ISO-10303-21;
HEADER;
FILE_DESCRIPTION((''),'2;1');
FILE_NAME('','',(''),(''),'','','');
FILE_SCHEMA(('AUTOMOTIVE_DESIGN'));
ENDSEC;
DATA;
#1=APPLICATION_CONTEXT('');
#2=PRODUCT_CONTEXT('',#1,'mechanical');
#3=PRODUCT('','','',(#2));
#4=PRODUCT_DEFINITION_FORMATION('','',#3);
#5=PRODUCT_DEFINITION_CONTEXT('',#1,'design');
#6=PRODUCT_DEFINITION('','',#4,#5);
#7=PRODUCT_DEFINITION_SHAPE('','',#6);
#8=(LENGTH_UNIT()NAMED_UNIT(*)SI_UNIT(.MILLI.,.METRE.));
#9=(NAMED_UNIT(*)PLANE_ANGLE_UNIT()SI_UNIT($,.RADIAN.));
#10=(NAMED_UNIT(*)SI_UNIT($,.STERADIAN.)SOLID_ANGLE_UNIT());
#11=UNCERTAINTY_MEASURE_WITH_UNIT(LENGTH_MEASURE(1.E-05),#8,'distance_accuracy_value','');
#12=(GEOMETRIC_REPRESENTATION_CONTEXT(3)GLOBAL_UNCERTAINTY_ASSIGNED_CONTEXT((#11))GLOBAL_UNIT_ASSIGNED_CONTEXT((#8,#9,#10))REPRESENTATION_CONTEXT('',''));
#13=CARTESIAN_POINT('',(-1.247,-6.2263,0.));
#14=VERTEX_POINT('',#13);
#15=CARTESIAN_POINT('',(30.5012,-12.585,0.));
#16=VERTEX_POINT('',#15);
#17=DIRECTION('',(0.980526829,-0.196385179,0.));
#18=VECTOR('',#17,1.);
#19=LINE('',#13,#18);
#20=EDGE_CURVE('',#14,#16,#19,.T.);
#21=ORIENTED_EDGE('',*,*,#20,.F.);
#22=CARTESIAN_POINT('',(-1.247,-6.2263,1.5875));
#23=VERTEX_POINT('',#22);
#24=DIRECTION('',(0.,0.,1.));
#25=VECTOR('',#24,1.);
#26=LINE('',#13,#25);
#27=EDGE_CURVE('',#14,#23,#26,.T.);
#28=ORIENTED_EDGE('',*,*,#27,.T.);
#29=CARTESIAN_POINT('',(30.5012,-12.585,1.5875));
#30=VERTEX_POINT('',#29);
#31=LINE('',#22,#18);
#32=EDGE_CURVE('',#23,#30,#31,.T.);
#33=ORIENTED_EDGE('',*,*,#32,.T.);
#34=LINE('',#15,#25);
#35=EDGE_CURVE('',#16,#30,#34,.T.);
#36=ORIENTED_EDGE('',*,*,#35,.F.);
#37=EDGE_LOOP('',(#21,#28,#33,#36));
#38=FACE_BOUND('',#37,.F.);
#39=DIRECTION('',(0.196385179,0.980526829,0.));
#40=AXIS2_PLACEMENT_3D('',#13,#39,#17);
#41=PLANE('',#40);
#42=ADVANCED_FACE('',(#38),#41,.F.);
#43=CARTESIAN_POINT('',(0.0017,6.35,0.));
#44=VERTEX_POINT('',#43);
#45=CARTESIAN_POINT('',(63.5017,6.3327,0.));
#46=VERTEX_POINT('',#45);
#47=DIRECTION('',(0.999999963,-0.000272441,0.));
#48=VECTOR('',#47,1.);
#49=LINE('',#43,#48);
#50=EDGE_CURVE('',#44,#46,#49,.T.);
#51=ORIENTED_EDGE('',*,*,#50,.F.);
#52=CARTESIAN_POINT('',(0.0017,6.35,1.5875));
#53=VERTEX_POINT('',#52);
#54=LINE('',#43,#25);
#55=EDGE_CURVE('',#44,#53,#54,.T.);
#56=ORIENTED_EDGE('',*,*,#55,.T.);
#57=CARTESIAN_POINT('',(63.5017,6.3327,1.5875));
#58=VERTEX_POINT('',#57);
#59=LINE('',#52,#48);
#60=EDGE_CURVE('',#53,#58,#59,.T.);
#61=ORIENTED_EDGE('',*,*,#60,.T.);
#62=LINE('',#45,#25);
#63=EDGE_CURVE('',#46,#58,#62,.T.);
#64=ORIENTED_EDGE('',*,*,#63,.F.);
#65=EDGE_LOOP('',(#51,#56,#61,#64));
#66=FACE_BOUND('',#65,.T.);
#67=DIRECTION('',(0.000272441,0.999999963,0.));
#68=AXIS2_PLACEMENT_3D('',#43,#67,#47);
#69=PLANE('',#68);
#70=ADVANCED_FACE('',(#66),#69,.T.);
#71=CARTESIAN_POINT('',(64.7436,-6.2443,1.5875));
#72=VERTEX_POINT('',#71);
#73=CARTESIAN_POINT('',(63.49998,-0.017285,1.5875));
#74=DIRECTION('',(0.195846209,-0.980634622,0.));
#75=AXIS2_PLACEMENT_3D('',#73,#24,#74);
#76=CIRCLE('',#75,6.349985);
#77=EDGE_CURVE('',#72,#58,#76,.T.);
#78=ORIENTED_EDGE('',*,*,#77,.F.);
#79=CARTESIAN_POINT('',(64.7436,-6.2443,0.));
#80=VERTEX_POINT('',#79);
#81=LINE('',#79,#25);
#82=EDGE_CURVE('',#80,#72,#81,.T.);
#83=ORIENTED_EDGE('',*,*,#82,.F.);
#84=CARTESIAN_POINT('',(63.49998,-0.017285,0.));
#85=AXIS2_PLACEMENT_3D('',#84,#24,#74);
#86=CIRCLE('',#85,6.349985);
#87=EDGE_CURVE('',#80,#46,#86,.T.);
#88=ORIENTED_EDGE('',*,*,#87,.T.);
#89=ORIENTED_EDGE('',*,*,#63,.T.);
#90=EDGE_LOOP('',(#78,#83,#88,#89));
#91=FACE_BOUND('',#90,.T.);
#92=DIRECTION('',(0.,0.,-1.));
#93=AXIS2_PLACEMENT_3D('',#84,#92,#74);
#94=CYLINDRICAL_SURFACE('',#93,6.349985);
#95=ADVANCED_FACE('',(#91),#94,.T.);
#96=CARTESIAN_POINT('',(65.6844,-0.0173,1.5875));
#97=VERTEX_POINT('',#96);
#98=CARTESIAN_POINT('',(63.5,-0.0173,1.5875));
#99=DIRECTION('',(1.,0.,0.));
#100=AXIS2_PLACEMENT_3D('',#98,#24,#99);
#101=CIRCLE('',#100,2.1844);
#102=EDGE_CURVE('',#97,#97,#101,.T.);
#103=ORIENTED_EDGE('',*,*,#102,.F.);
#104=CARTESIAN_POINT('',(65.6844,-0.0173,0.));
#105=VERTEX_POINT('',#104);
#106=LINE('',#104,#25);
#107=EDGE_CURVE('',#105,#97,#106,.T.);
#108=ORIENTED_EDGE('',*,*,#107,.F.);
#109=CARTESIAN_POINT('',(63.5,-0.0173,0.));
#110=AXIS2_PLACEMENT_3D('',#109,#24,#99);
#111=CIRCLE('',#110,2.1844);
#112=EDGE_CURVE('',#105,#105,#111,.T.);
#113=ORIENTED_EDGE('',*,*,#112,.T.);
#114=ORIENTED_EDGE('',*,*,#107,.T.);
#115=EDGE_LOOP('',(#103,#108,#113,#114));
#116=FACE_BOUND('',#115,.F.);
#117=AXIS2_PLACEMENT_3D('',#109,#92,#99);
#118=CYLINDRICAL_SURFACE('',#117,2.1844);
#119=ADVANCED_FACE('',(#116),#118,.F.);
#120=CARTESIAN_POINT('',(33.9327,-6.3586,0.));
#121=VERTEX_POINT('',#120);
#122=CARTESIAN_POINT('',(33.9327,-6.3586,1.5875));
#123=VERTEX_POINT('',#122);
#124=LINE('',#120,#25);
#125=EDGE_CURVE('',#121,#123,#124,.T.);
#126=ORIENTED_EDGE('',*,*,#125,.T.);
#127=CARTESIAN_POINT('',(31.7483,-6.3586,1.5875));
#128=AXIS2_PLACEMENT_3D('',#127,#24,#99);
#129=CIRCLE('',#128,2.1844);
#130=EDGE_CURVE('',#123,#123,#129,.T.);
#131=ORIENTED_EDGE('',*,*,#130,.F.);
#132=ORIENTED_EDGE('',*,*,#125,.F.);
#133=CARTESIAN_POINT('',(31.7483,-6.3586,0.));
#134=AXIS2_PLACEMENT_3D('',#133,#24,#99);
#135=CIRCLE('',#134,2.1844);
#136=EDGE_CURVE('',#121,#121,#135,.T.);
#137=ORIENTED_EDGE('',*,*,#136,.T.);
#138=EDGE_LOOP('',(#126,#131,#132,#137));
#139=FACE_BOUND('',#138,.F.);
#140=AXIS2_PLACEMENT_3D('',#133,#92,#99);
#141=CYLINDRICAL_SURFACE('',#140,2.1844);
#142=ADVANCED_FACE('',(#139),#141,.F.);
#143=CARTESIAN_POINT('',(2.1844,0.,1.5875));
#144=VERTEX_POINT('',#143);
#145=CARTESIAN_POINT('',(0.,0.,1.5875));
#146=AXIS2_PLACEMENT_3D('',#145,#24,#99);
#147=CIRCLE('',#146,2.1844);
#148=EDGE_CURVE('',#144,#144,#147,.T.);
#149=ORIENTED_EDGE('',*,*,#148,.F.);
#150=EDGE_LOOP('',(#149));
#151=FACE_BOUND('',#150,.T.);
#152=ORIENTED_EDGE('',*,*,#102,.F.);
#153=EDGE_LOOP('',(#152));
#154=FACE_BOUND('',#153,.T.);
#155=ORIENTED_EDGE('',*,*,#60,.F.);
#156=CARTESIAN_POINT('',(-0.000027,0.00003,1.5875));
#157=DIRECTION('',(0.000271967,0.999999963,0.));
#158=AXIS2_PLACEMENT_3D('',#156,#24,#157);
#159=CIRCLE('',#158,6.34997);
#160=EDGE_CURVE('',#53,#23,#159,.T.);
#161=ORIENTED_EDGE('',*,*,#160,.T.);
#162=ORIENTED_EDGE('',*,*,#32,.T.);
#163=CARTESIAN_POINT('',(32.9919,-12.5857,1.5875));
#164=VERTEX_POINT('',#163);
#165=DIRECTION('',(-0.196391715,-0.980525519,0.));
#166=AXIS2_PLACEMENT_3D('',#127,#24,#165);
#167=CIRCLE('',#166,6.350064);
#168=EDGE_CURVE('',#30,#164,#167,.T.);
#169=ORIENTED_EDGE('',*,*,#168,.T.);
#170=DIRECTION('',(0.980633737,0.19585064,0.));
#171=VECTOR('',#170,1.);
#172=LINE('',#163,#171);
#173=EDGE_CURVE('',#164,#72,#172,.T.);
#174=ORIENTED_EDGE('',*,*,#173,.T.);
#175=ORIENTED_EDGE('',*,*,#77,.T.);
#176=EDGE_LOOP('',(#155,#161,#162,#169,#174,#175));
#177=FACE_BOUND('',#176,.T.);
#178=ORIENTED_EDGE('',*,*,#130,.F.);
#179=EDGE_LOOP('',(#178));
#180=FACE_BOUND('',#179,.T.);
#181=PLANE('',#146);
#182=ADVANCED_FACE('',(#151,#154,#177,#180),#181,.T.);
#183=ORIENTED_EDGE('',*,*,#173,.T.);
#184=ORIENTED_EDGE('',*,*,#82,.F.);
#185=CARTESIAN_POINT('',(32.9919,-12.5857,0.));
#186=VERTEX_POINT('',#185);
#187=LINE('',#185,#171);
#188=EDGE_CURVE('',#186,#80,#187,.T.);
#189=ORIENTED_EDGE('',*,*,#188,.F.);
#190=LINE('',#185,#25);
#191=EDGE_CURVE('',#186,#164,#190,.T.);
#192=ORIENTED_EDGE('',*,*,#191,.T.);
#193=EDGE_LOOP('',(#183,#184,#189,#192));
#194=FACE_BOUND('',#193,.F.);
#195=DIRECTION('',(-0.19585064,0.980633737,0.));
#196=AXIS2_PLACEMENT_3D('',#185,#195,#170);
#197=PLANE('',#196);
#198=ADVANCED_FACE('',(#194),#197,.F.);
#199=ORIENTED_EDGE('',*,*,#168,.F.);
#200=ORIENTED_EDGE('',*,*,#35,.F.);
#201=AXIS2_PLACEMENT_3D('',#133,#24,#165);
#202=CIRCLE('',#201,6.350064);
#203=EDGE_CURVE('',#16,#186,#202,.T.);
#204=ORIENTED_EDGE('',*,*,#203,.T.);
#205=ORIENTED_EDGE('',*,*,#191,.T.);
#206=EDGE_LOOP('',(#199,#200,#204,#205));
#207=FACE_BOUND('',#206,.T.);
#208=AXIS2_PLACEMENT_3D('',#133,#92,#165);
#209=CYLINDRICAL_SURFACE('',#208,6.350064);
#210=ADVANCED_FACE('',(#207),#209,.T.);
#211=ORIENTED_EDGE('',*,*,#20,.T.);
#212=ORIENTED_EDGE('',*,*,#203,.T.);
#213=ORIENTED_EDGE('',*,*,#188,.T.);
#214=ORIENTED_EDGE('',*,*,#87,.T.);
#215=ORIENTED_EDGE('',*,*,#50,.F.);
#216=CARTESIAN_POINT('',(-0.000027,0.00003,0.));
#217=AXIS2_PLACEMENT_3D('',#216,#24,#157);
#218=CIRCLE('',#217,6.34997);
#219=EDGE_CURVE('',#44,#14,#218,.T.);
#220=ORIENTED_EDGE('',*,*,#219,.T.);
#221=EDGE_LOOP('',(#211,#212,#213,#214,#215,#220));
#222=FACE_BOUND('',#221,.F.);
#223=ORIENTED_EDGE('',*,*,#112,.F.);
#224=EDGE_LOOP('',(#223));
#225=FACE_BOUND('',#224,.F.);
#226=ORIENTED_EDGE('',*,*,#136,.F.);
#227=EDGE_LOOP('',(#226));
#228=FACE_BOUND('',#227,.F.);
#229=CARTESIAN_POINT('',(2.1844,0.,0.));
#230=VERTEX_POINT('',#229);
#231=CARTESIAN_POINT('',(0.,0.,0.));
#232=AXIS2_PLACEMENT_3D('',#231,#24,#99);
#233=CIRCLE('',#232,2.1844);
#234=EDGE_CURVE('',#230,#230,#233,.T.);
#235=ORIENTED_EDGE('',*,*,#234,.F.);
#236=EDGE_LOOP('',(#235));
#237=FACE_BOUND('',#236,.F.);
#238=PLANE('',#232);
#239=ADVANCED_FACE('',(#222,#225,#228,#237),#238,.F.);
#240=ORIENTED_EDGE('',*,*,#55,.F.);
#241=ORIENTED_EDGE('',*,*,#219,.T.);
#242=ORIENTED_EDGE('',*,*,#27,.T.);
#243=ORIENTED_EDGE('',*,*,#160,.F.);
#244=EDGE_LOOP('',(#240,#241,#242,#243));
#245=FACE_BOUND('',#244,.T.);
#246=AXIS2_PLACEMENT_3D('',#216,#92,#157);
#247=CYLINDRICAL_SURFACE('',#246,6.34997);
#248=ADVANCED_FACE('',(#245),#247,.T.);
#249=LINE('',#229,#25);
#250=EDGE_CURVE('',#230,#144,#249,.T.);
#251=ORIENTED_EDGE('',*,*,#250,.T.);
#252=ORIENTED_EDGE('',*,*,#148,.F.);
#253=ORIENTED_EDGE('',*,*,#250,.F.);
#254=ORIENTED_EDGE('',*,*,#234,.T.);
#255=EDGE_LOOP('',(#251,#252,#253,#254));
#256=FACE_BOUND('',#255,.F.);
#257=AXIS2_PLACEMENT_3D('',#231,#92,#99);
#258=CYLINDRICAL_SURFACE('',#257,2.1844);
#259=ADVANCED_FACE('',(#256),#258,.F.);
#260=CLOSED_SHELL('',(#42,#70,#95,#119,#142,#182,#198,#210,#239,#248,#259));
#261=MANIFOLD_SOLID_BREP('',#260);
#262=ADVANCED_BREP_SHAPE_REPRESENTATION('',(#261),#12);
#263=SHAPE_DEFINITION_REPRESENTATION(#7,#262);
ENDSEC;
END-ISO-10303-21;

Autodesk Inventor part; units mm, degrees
ref_plane "YZ Plane" through (0, 0, 0) normal (1, 0, 0) x (0, 1, 0)
ref_plane "XZ Plane" through (0, 0, 0) normal (0, 1, 0) x (-1, 0, 0)
ref_plane "XY Plane" through (0, 0, 0) normal (0, 0, 1) x (1, 0, 0)
sketch "main" plane through (0, 0, 0) normal (0, 0, 1) x (1, 0, 0)
  circle A0 centre (5.5393, 31.9986) radius 2.1844
  circle A1 centre (5.5393, -31.5014) radius 2.1844
  arc A2 (11.8893, 31.9986) -> (-0.6874, 33.244) centre (5.5393, 31.9986) ccw
  arc A3 (-0.6874, -32.7467) -> (11.8893, -31.5014) centre (5.5393, -31.5014) ccw
  line L0 (11.8893, 31.9986) -> (11.8893, -31.5014)
  circle A4 centre (-0.8107, 0.2486) radius 2.1844
  arc A5 (-7.0374, 1.494) -> (-7.0374, -0.9967) centre (-0.8107, 0.2486) ccw
  line L1 (-0.6874, 33.244) -> (-7.0374, 1.494)
  line L2 (-7.0374, -0.9967) -> (-0.6874, -32.7467)
  point P0 (2.0663, 0.2486)
sketch "Sketch1" plane through (0, 0, 0) normal (0, 0, 1) x (1, 0, 0)
  circle A0 centre (0, 0) radius 2.1844
  circle A1 centre (63.5, -0.0173) radius 2.1844
  arc A2 (0.0017, 6.35) -> (-1.247, -6.2263) centre (0, 0) ccw
  arc A3 (64.7436, -6.2443) -> (63.5017, 6.3327) centre (63.5, -0.0173) ccw
  line L0 (0.0017, 6.35) -> (63.5017, 6.3327)
  circle A4 centre (31.7483, -6.3586) radius 2.1844
  arc A5 (30.5012, -12.585) -> (32.9919, -12.5857) centre (31.7483, -6.3586) ccw
  line L1 (-1.247, -6.2263) -> (30.5012, -12.585)
  line L2 (32.9919, -12.5857) -> (64.7436, -6.2443)
  point P0 (0, 0)
extrude "Extrusion1" add sketch "Sketch1" along normal blind 1.5875
properties part number "gearbox_gusset" material "Acetal Resin, White"
